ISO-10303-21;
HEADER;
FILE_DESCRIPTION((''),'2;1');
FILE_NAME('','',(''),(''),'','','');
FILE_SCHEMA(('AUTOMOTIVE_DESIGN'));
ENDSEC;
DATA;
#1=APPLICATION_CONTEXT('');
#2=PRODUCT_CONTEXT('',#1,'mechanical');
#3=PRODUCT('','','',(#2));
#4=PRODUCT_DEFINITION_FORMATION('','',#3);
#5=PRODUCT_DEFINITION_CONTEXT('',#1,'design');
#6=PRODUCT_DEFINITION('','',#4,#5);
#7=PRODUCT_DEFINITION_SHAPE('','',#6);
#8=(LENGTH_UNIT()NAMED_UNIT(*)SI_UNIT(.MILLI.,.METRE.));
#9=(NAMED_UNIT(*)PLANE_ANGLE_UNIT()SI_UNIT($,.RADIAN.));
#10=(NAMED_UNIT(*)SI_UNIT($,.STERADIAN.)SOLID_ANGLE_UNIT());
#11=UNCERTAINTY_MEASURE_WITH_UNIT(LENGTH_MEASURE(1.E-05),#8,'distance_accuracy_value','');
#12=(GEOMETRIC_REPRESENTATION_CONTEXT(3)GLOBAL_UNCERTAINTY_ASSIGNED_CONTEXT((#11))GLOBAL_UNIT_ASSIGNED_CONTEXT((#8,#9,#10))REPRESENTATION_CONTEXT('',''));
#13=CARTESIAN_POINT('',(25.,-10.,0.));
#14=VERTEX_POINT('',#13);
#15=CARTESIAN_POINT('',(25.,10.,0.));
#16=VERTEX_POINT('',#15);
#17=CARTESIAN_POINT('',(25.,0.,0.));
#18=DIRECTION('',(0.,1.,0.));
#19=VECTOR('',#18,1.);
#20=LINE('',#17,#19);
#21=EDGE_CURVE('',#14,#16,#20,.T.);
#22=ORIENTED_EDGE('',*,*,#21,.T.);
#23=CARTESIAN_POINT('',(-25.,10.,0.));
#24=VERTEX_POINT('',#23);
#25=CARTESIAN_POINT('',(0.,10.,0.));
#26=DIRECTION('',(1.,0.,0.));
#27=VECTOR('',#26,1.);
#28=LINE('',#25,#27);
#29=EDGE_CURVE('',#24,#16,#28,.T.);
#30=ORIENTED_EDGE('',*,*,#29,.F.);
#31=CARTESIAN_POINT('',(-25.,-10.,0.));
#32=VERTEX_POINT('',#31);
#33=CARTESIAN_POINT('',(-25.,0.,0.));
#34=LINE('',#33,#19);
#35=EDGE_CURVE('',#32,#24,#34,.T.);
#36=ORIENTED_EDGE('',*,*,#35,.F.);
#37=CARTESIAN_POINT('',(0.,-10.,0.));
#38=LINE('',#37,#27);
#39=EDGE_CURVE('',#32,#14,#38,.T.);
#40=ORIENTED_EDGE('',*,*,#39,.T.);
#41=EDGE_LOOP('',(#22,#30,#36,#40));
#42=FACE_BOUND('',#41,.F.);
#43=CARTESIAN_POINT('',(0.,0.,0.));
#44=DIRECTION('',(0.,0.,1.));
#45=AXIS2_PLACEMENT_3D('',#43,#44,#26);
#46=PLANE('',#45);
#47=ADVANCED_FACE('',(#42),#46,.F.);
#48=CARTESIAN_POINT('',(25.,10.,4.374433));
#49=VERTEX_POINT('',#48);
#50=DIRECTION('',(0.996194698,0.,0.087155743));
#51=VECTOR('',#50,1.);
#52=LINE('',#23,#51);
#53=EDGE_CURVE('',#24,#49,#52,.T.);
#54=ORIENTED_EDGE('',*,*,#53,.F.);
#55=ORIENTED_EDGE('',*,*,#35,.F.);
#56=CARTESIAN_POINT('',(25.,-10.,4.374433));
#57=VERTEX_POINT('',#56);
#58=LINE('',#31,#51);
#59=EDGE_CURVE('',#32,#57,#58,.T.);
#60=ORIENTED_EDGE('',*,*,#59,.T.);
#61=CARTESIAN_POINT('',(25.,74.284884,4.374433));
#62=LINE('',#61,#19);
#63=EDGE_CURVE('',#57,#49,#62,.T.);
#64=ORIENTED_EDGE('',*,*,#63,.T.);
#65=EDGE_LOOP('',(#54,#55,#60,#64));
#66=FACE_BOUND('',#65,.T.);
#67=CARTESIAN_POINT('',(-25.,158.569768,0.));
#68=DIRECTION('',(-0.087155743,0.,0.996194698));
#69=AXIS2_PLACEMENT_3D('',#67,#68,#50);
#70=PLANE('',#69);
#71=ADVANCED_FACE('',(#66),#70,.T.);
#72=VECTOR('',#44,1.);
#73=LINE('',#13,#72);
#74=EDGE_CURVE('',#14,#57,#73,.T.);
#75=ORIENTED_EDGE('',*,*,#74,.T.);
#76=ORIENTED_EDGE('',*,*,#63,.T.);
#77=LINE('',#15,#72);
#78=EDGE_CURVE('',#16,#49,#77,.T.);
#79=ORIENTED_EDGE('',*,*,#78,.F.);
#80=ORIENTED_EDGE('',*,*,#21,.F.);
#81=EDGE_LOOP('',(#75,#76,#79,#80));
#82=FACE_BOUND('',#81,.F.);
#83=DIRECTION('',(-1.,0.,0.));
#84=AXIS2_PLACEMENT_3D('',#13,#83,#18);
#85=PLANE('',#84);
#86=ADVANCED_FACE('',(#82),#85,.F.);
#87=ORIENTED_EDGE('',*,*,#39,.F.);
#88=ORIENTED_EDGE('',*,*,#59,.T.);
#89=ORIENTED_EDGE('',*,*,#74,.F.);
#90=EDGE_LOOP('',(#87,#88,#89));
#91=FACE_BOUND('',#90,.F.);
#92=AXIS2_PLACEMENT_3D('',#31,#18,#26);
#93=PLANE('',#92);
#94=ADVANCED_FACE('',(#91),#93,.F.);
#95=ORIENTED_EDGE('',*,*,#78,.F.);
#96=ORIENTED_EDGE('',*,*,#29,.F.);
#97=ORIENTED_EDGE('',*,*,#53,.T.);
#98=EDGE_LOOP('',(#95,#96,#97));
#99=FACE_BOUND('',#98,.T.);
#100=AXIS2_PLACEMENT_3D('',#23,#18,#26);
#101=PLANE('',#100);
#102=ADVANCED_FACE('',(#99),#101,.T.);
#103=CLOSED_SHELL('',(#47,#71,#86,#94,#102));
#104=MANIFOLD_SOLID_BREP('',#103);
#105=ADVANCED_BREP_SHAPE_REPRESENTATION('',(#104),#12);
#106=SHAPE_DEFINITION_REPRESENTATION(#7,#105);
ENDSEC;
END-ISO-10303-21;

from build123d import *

# Parameters (mm, degrees)
F0_W        = 50
F0_H        = 20
F1_DEPTH    = 5
F2_T1_DEPTH = 317.1395350057


# Not quite as in the source:
# - a fillet or chamfer that OpenCascade refuses, or shapes differently, is made with other operations: its cross-section is extruded or revolved along the edge and cut away or added


with BuildPart() as f1:
    # F0 (on Top) → F1 (new body)
    with BuildSketch(Plane.XY):
        Rectangle(F0_W, F0_H)
    extrude(amount=F1_DEPTH)

    # F2: chamfer of 5 x 57.1502615138 on 1 edges, made by hand

    # F2_s2 → F2_t1 (cut)
    with BuildSketch(Plane.XZ.offset(-158.5697675028)):
        Polygon((-25, 0), (32.1502615138, 5), (-25, 5), align=None)
    extrude(amount=F2_T1_DEPTH, mode=Mode.SUBTRACT)


solid = f1.part
